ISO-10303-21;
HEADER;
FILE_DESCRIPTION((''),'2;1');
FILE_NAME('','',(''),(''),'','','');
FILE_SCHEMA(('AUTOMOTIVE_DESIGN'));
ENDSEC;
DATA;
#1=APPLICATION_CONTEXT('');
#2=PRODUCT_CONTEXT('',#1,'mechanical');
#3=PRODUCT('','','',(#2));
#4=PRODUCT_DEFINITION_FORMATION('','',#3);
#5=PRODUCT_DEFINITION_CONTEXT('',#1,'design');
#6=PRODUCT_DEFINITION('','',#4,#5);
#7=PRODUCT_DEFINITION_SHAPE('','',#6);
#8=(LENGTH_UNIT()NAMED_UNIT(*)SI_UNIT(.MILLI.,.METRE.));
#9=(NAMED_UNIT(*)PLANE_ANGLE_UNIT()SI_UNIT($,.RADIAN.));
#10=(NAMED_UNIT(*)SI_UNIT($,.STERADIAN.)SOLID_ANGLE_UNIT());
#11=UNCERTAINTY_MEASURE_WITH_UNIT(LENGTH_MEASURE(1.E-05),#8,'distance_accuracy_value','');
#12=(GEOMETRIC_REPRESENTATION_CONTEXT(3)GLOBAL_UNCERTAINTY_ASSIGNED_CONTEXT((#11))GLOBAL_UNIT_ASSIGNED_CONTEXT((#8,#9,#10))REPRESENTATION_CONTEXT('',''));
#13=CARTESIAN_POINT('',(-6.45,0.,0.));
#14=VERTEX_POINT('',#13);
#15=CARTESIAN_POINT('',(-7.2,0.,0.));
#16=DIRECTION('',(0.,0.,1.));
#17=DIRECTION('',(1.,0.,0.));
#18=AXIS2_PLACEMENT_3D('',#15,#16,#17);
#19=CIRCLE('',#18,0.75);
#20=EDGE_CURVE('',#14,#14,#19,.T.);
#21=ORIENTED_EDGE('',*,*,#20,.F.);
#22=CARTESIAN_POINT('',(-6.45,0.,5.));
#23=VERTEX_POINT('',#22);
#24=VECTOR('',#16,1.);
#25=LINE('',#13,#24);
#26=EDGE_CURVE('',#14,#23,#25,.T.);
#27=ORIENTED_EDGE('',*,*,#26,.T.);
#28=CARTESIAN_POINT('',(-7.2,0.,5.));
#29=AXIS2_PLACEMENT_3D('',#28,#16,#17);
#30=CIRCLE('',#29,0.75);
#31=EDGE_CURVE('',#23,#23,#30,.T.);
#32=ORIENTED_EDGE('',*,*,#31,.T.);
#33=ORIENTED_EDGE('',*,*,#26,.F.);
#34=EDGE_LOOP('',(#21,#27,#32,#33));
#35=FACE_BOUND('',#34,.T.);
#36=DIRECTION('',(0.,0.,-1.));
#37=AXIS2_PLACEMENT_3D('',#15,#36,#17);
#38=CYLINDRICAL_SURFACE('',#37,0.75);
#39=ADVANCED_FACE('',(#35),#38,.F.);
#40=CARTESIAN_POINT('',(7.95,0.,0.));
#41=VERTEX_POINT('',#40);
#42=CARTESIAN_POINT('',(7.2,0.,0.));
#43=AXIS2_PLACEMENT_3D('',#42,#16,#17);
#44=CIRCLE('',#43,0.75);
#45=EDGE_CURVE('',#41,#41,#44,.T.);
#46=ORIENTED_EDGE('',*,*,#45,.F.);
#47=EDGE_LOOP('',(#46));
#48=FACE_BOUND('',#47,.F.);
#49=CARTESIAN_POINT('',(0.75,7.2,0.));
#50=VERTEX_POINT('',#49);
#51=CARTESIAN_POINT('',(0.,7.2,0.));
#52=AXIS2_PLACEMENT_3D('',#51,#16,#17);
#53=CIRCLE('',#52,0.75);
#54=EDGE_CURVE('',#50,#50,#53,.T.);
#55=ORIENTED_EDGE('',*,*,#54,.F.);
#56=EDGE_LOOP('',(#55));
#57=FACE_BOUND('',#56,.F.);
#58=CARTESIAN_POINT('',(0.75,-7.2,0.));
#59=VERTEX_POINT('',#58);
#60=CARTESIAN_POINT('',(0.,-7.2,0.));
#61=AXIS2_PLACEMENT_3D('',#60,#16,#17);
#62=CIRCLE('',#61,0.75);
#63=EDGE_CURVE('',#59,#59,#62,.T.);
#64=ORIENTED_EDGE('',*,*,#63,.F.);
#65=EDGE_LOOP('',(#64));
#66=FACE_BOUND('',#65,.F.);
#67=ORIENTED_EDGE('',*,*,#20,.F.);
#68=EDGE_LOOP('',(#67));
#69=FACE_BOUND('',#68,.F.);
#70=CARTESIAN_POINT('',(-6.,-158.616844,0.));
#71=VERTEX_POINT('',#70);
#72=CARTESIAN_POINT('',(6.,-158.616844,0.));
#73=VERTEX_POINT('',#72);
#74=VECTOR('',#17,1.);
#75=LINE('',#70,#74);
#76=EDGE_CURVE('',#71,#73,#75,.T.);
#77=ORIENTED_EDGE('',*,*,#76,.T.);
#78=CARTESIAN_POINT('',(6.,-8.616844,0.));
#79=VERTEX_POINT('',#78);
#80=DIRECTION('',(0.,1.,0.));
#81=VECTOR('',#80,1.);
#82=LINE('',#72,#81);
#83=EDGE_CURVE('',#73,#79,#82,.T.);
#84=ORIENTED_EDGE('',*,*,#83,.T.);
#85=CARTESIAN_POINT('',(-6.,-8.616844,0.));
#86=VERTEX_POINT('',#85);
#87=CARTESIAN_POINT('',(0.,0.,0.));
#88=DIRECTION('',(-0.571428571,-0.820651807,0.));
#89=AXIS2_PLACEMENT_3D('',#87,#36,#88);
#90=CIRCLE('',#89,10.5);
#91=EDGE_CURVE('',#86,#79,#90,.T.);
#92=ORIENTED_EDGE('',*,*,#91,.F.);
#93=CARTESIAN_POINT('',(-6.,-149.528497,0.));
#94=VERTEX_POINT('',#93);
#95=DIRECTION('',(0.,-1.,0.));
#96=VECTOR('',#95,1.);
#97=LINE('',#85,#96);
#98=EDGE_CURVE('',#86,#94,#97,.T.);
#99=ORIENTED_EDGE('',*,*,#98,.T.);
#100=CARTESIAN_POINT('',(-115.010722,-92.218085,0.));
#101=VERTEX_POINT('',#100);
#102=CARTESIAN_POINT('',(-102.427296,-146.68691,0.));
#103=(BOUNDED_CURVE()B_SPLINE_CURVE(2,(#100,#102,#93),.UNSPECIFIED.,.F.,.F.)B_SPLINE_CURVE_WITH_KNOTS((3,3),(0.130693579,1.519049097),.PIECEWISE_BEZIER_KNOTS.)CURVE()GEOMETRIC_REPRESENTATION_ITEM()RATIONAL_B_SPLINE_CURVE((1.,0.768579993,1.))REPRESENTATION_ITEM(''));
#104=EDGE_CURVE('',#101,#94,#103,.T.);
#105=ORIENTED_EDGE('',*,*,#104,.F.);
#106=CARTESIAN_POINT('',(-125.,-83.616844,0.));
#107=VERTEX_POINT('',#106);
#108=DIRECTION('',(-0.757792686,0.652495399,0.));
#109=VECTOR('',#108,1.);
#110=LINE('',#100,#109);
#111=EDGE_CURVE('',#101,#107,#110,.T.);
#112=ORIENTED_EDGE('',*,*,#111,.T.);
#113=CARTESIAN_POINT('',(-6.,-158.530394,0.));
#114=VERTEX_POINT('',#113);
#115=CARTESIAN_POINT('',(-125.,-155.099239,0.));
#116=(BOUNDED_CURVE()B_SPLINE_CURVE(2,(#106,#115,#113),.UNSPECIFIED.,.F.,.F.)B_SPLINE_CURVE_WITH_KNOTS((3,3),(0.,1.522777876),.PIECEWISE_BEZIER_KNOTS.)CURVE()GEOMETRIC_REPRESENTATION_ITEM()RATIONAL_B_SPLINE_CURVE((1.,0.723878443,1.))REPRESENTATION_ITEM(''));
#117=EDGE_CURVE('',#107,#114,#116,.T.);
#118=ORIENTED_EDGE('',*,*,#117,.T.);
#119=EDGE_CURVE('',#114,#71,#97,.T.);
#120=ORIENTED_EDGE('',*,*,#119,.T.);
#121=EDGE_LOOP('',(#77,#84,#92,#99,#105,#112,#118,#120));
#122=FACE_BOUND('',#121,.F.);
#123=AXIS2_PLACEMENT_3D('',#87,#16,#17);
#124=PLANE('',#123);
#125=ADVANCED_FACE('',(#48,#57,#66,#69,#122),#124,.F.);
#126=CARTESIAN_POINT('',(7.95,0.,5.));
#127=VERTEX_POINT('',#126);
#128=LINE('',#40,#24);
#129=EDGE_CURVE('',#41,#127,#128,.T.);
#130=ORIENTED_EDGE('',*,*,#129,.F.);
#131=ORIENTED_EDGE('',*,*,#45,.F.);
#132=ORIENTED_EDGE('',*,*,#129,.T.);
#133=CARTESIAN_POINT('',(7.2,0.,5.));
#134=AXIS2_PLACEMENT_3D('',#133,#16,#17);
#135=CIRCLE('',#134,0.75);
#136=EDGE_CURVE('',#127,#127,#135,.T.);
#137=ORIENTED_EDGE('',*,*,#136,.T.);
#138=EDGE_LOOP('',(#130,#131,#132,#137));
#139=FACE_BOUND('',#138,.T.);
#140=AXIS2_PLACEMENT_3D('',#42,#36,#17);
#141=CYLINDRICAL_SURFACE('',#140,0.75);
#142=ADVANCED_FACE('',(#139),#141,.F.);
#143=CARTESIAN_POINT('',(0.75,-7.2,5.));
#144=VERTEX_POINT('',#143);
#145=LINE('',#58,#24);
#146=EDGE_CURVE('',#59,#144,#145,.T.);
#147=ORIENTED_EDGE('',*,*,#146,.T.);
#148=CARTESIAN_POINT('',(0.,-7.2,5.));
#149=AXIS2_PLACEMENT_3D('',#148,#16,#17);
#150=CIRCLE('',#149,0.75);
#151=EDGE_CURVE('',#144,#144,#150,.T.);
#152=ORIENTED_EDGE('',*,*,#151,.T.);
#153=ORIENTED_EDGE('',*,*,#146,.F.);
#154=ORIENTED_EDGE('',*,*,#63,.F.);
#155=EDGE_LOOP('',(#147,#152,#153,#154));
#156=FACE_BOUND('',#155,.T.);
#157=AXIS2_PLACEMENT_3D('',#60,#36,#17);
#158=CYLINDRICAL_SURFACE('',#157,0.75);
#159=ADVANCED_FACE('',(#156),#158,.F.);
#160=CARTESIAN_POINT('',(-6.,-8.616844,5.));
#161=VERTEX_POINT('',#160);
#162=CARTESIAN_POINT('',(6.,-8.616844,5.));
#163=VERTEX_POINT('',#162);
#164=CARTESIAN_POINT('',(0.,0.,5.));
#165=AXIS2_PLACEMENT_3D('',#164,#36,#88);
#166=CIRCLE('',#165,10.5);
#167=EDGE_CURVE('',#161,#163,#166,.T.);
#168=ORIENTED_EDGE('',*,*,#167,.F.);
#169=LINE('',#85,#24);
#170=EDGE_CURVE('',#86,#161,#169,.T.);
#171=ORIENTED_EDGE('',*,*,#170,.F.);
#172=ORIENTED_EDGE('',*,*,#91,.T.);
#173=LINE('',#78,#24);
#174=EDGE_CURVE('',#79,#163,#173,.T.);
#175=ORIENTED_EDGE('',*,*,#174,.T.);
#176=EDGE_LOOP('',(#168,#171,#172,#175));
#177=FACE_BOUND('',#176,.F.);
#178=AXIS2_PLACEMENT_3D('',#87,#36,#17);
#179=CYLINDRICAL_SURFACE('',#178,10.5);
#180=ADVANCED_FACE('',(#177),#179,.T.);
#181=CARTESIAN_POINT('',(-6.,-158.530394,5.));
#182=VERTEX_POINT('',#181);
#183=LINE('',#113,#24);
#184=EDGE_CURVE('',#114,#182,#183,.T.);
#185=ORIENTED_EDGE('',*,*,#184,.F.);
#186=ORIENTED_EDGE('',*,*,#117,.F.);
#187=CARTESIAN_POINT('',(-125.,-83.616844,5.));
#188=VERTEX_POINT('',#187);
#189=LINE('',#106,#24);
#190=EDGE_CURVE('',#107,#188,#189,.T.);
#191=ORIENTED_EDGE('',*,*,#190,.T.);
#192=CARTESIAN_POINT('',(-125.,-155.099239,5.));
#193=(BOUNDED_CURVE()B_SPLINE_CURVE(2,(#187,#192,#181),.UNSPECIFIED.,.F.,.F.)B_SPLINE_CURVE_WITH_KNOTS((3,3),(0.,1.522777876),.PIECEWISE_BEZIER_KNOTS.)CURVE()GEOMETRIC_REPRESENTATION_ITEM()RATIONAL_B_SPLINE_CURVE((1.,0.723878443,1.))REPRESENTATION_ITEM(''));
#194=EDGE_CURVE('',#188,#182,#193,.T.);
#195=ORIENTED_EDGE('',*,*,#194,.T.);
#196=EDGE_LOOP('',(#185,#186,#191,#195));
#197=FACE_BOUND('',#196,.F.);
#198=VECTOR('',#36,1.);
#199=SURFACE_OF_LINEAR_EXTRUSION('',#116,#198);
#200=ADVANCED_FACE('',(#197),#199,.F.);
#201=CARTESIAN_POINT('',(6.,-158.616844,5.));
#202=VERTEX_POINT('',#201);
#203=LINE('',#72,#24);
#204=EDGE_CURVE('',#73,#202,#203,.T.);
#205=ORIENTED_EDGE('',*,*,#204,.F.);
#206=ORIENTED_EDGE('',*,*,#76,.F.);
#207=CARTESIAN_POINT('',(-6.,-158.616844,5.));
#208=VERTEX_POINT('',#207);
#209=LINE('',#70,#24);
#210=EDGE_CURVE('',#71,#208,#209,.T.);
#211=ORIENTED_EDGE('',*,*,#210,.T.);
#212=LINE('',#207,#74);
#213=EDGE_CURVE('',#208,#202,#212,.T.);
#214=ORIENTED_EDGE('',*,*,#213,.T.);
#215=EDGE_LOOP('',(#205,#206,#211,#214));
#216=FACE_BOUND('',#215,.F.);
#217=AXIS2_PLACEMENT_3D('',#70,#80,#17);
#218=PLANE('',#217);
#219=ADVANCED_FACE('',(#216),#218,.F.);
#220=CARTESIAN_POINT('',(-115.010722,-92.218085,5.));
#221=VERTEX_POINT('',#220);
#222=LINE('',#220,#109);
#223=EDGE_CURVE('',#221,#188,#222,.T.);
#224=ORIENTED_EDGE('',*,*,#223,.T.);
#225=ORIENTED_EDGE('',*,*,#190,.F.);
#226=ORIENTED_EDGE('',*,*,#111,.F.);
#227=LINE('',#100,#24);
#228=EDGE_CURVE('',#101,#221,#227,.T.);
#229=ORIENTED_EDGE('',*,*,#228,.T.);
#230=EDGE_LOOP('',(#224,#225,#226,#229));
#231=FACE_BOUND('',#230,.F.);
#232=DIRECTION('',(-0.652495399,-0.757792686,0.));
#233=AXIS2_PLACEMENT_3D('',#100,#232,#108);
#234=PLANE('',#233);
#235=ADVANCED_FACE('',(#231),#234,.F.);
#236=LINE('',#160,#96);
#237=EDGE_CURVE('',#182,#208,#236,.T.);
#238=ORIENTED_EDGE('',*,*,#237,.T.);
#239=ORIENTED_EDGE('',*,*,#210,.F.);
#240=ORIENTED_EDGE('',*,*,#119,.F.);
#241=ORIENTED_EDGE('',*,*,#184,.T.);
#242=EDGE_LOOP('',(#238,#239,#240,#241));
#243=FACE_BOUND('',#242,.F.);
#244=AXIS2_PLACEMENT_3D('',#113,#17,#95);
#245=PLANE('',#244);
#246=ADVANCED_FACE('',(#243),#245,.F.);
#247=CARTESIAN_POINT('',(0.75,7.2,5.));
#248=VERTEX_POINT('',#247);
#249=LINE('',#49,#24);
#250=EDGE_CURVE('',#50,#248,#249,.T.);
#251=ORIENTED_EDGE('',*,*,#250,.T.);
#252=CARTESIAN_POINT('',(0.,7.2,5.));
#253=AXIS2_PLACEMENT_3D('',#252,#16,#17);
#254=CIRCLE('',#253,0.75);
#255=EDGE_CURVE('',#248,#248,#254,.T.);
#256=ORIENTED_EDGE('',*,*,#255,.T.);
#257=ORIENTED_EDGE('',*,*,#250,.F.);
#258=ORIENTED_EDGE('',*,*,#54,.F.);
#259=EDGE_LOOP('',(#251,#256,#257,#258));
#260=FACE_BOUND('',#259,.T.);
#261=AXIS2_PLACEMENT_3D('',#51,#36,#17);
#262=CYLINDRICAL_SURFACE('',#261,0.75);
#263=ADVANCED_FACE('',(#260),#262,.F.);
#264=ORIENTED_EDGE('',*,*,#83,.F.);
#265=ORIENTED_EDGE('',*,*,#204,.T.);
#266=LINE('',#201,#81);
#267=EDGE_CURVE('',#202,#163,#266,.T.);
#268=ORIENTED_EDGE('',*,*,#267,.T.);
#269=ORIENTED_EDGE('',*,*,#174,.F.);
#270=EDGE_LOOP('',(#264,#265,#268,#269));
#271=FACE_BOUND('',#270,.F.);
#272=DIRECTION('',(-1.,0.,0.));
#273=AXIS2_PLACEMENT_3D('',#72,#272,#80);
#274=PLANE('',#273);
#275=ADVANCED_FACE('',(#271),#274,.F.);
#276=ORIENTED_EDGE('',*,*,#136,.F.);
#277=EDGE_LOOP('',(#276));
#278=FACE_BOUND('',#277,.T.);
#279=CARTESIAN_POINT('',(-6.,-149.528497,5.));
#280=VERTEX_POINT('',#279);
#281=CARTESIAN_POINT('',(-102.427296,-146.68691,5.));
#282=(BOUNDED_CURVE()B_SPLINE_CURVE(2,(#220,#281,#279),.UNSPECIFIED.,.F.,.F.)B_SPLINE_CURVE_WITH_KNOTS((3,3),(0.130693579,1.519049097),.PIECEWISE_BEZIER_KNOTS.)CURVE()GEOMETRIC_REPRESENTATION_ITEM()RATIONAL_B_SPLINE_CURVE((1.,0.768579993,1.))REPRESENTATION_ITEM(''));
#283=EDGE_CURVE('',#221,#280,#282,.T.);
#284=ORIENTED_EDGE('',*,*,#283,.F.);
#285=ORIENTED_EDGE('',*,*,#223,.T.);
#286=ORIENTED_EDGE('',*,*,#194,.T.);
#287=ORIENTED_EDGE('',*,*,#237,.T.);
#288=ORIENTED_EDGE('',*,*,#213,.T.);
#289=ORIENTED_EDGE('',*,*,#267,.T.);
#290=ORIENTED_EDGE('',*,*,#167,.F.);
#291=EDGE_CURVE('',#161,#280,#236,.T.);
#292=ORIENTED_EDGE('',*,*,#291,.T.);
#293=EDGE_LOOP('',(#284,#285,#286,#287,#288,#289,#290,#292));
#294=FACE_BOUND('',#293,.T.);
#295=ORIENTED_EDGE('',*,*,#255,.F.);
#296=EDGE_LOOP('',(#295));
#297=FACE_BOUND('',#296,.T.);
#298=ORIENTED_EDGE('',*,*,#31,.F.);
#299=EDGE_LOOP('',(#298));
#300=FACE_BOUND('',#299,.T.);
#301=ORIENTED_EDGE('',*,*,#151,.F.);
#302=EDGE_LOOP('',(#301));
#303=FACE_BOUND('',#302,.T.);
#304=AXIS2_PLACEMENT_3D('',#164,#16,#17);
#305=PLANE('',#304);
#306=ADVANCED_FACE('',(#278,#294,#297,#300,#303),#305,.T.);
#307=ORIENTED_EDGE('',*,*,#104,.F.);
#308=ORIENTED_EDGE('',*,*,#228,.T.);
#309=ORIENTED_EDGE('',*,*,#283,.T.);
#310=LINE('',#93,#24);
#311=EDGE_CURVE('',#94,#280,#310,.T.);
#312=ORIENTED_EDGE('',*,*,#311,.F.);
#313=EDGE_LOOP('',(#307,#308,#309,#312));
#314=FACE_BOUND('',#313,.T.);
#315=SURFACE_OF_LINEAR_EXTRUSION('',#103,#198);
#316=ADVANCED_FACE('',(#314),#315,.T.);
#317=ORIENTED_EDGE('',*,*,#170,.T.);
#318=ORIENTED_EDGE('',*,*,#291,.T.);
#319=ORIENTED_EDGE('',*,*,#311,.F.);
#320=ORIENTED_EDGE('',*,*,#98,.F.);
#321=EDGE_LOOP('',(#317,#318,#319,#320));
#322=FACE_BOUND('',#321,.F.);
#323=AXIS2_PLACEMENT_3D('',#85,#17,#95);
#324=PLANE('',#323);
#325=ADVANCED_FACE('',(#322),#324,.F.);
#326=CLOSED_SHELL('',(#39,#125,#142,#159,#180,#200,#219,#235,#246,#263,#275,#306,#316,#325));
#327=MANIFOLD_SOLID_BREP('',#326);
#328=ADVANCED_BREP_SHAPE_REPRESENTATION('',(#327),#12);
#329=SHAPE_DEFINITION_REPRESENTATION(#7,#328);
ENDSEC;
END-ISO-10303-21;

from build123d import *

# Parameters (mm, degrees)
F0_R     = 10.5
F0_R_2   = 0.75
F1_DEPTH = 5
F3_DEPTH = 5


# Not quite as in the source:
# - a feature names something its author has since deleted; it is built from what else it names


with BuildPart() as f1:
    # F0 (on Top) → F1 (new body)
    with BuildSketch(Plane.XY):
        Circle(F0_R)
        with Locations((-3.45, -7.2)):
            Circle(F0_R_2, mode=Mode.SUBTRACT)
        with Locations((-7.2, -3.45)):
            Circle(F0_R_2, mode=Mode.SUBTRACT)
        with Locations((0, -7.2)):
            Circle(F0_R_2, mode=Mode.SUBTRACT)
        with Locations((3.45, -7.2)):
            Circle(F0_R_2, mode=Mode.SUBTRACT)
        with Locations((7.2, -3.45)):
            Circle(F0_R_2, mode=Mode.SUBTRACT)
        with Locations((-7.2, 0)):
            Circle(F0_R_2, mode=Mode.SUBTRACT)
        with Locations((-7.2, 3.45)):
            Circle(F0_R_2, mode=Mode.SUBTRACT)
        with Locations((-3.45, 7.2)):
            Circle(F0_R_2, mode=Mode.SUBTRACT)
        with Locations((7.2, 0)):
            Circle(F0_R_2, mode=Mode.SUBTRACT)
        with Locations((7.2, 3.45)):
            Circle(F0_R_2, mode=Mode.SUBTRACT)
        with Locations((0, 7.2)):
            Circle(F0_R_2, mode=Mode.SUBTRACT)
        with Locations((3.45, 7.2)):
            Circle(F0_R_2, mode=Mode.SUBTRACT)
        with Locations((3.45, -7.2)):
            Circle(F0_R_2)
        with Locations((-3.45, -7.2)):
            Circle(F0_R_2)
        with Locations((-7.2, -3.45)):
            Circle(F0_R_2)
        with Locations((-7.2, 3.45)):
            Circle(F0_R_2)
        with Locations((-3.45, 7.2)):
            Circle(F0_R_2)
        with Locations((3.45, 7.2)):
            Circle(F0_R_2)
        with Locations((7.2, 3.45)):
            Circle(F0_R_2)
        with Locations((7.2, -3.45)):
            Circle(F0_R_2)
    extrude(amount=F1_DEPTH)

    # F2 (on Top) → F3 (join, through all)
    with BuildSketch(Plane.XY):
        with BuildLine():
            Line((6, -8.7032937936), (6, -8.6168439698))
            Line((6, -8.6168439698), (-5.159e-07, -8.6168439698))
            add(Edge.make_bspline(
                [(6, -8.7032937936), (3.0017297357, -8.6168439624), (-5.159e-07, -8.6168439698)],
                knots=[4.6643705292, 4.6643705292, 4.6643705292, 4.7123889845, 4.7123889845, 4.7123889845], degree=2, weights=[1, 0.9997117923, 1]))
        make_face()
        with BuildLine():
            add(Edge.make_bspline(
                [(-5.159e-07, -8.6168439698), (-3.0017302513, -8.6168439772), (-6, -8.7032937936)],
                knots=[4.7123889845, 4.7123889845, 4.7123889845, 4.7604074315, 4.7604074315, 4.7604074315], degree=2, weights=[1, 0.9997117924, 1]))
            Line((-5.159e-07, -8.6168439698), (-6, -8.6168439698))
            Line((-6, -8.6168439698), (-6, -8.7032937936))
        make_face()
        with BuildLine():
            Line((6, -158.6168439698), (6, -158.530394146))
            add(Edge.make_bspline(
                [(0, -158.6168439698), (3.0017299935, -158.6168439698), (6, -158.530394146)],
                knots=[1.5707963268, 1.5707963268, 1.5707963268, 1.6188147779, 1.6188147779, 1.6188147779], degree=2, weights=[1, 0.9997117924, 1]))
            Line((0, -158.6168439698), (6, -158.6168439698))
        make_face()
        with BuildLine():
            Line((-6, -158.6168439698), (0, -158.6168439698))
            add(Edge.make_bspline(
                [(-6, -158.530394146), (-3.0017299935, -158.6168439698), (0, -158.6168439698)],
                knots=[1.5227778757, 1.5227778757, 1.5227778757, 1.5707963268, 1.5707963268, 1.5707963268], degree=2, weights=[1, 0.9997117924, 1]))
            Line((-6, -158.530394146), (-6, -158.6168439698))
        make_face()
        with BuildLine():
            add(Edge.make_bspline(
                [(0, -158.6168439698), (3.0017299935, -158.6168439698), (6, -158.530394146)],
                knots=[1.5707963268, 1.5707963268, 1.5707963268, 1.6188147779, 1.6188147779, 1.6188147779], degree=2, weights=[1, 0.9997117924, 1]))
            Line((6, -158.530394146), (6, -149.528497087))
            add(Edge.make_bspline(
                [(-6, -149.528497087), (0, -149.7053092713), (6, -149.528497087)],
                knots=[1.5190490974, 1.5190490974, 1.5190490974, 1.6225435562, 1.6225435562, 1.6225435562], degree=2, weights=[1, 0.9986614109, 1]))
            Line((-6, -149.528497087), (-6, -158.530394146))
            add(Edge.make_bspline(
                [(-6, -158.530394146), (-3.0017299935, -158.6168439698), (0, -158.6168439698)],
                knots=[1.5227778757, 1.5227778757, 1.5227778757, 1.5707963268, 1.5707963268, 1.5707963268], degree=2, weights=[1, 0.9997117924, 1]))
        make_face()
        with BuildLine():
            add(Edge.make_bspline(
                [(6, -8.7032937936), (3.0017297357, -8.6168439624), (-5.159e-07, -8.6168439698)],
                knots=[4.6643705292, 4.6643705292, 4.6643705292, 4.7123889845, 4.7123889845, 4.7123889845], degree=2, weights=[1, 0.9997117923, 1]))
            add(Edge.make_bspline(
                [(-5.159e-07, -8.6168439698), (-3.0017302513, -8.6168439772), (-6, -8.7032937936)],
                knots=[4.7123889845, 4.7123889845, 4.7123889845, 4.7604074315, 4.7604074315, 4.7604074315], degree=2, weights=[1, 0.9997117924, 1]))
            Line((-6, -8.7032937936), (-6, -17.7051908526))
            add(Edge.make_bspline(
                [(6, -17.7051908526), (0, -17.5283786684), (-6, -17.7051908526)],
                knots=[4.660641751, 4.660641751, 4.660641751, 4.7641362098, 4.7641362098, 4.7641362098], degree=2, weights=[1, 0.9986614109, 1]))
            Line((6, -17.7051908526), (6, -8.7032937936))
        make_face()
        with BuildLine():
            Line((6, -149.528497087), (6, -17.7051908526))
            add(Edge.make_bspline(
                [(6, -17.7051908526), (0, -17.5283786684), (-6, -17.7051908526)],
                knots=[4.660641751, 4.660641751, 4.660641751, 4.7641362098, 4.7641362098, 4.7641362098], degree=2, weights=[1, 0.9986614109, 1]))
            Line((-6, -17.7051908526), (-6, -149.528497087))
            add(Edge.make_bspline(
                [(-6, -149.528497087), (0, -149.7053092713), (6, -149.528497087)],
                knots=[1.5190490974, 1.5190490974, 1.5190490974, 1.6225435562, 1.6225435562, 1.6225435562], degree=2, weights=[1, 0.9986614109, 1]))
        make_face()
        with BuildLine():
            Line((-115.0107222667, -92.2180852847), (-125, -83.6168439698))
            add(Edge.make_bspline(
                [(-125, -83.6168439698), (-125, -155.0992391761), (-6, -158.530394146)],
                knots=[0, 0, 0, 1.5227778757, 1.5227778757, 1.5227778757], degree=2, weights=[1, 0.7238784428, 1]))
            Line((-6, -158.530394146), (-6, -149.528497087))
            add(Edge.make_bspline(
                [(-115.0107222667, -92.2180852847), (-102.427295797, -146.686910289), (-6, -149.528497087)],
                knots=[0.1306935792, 0.1306935792, 0.1306935792, 1.5190490974, 1.5190490974, 1.5190490974], degree=2, weights=[1, 0.7685799932, 1]))
        make_face()
    extrude(amount=F3_DEPTH)


solid = f1.part
